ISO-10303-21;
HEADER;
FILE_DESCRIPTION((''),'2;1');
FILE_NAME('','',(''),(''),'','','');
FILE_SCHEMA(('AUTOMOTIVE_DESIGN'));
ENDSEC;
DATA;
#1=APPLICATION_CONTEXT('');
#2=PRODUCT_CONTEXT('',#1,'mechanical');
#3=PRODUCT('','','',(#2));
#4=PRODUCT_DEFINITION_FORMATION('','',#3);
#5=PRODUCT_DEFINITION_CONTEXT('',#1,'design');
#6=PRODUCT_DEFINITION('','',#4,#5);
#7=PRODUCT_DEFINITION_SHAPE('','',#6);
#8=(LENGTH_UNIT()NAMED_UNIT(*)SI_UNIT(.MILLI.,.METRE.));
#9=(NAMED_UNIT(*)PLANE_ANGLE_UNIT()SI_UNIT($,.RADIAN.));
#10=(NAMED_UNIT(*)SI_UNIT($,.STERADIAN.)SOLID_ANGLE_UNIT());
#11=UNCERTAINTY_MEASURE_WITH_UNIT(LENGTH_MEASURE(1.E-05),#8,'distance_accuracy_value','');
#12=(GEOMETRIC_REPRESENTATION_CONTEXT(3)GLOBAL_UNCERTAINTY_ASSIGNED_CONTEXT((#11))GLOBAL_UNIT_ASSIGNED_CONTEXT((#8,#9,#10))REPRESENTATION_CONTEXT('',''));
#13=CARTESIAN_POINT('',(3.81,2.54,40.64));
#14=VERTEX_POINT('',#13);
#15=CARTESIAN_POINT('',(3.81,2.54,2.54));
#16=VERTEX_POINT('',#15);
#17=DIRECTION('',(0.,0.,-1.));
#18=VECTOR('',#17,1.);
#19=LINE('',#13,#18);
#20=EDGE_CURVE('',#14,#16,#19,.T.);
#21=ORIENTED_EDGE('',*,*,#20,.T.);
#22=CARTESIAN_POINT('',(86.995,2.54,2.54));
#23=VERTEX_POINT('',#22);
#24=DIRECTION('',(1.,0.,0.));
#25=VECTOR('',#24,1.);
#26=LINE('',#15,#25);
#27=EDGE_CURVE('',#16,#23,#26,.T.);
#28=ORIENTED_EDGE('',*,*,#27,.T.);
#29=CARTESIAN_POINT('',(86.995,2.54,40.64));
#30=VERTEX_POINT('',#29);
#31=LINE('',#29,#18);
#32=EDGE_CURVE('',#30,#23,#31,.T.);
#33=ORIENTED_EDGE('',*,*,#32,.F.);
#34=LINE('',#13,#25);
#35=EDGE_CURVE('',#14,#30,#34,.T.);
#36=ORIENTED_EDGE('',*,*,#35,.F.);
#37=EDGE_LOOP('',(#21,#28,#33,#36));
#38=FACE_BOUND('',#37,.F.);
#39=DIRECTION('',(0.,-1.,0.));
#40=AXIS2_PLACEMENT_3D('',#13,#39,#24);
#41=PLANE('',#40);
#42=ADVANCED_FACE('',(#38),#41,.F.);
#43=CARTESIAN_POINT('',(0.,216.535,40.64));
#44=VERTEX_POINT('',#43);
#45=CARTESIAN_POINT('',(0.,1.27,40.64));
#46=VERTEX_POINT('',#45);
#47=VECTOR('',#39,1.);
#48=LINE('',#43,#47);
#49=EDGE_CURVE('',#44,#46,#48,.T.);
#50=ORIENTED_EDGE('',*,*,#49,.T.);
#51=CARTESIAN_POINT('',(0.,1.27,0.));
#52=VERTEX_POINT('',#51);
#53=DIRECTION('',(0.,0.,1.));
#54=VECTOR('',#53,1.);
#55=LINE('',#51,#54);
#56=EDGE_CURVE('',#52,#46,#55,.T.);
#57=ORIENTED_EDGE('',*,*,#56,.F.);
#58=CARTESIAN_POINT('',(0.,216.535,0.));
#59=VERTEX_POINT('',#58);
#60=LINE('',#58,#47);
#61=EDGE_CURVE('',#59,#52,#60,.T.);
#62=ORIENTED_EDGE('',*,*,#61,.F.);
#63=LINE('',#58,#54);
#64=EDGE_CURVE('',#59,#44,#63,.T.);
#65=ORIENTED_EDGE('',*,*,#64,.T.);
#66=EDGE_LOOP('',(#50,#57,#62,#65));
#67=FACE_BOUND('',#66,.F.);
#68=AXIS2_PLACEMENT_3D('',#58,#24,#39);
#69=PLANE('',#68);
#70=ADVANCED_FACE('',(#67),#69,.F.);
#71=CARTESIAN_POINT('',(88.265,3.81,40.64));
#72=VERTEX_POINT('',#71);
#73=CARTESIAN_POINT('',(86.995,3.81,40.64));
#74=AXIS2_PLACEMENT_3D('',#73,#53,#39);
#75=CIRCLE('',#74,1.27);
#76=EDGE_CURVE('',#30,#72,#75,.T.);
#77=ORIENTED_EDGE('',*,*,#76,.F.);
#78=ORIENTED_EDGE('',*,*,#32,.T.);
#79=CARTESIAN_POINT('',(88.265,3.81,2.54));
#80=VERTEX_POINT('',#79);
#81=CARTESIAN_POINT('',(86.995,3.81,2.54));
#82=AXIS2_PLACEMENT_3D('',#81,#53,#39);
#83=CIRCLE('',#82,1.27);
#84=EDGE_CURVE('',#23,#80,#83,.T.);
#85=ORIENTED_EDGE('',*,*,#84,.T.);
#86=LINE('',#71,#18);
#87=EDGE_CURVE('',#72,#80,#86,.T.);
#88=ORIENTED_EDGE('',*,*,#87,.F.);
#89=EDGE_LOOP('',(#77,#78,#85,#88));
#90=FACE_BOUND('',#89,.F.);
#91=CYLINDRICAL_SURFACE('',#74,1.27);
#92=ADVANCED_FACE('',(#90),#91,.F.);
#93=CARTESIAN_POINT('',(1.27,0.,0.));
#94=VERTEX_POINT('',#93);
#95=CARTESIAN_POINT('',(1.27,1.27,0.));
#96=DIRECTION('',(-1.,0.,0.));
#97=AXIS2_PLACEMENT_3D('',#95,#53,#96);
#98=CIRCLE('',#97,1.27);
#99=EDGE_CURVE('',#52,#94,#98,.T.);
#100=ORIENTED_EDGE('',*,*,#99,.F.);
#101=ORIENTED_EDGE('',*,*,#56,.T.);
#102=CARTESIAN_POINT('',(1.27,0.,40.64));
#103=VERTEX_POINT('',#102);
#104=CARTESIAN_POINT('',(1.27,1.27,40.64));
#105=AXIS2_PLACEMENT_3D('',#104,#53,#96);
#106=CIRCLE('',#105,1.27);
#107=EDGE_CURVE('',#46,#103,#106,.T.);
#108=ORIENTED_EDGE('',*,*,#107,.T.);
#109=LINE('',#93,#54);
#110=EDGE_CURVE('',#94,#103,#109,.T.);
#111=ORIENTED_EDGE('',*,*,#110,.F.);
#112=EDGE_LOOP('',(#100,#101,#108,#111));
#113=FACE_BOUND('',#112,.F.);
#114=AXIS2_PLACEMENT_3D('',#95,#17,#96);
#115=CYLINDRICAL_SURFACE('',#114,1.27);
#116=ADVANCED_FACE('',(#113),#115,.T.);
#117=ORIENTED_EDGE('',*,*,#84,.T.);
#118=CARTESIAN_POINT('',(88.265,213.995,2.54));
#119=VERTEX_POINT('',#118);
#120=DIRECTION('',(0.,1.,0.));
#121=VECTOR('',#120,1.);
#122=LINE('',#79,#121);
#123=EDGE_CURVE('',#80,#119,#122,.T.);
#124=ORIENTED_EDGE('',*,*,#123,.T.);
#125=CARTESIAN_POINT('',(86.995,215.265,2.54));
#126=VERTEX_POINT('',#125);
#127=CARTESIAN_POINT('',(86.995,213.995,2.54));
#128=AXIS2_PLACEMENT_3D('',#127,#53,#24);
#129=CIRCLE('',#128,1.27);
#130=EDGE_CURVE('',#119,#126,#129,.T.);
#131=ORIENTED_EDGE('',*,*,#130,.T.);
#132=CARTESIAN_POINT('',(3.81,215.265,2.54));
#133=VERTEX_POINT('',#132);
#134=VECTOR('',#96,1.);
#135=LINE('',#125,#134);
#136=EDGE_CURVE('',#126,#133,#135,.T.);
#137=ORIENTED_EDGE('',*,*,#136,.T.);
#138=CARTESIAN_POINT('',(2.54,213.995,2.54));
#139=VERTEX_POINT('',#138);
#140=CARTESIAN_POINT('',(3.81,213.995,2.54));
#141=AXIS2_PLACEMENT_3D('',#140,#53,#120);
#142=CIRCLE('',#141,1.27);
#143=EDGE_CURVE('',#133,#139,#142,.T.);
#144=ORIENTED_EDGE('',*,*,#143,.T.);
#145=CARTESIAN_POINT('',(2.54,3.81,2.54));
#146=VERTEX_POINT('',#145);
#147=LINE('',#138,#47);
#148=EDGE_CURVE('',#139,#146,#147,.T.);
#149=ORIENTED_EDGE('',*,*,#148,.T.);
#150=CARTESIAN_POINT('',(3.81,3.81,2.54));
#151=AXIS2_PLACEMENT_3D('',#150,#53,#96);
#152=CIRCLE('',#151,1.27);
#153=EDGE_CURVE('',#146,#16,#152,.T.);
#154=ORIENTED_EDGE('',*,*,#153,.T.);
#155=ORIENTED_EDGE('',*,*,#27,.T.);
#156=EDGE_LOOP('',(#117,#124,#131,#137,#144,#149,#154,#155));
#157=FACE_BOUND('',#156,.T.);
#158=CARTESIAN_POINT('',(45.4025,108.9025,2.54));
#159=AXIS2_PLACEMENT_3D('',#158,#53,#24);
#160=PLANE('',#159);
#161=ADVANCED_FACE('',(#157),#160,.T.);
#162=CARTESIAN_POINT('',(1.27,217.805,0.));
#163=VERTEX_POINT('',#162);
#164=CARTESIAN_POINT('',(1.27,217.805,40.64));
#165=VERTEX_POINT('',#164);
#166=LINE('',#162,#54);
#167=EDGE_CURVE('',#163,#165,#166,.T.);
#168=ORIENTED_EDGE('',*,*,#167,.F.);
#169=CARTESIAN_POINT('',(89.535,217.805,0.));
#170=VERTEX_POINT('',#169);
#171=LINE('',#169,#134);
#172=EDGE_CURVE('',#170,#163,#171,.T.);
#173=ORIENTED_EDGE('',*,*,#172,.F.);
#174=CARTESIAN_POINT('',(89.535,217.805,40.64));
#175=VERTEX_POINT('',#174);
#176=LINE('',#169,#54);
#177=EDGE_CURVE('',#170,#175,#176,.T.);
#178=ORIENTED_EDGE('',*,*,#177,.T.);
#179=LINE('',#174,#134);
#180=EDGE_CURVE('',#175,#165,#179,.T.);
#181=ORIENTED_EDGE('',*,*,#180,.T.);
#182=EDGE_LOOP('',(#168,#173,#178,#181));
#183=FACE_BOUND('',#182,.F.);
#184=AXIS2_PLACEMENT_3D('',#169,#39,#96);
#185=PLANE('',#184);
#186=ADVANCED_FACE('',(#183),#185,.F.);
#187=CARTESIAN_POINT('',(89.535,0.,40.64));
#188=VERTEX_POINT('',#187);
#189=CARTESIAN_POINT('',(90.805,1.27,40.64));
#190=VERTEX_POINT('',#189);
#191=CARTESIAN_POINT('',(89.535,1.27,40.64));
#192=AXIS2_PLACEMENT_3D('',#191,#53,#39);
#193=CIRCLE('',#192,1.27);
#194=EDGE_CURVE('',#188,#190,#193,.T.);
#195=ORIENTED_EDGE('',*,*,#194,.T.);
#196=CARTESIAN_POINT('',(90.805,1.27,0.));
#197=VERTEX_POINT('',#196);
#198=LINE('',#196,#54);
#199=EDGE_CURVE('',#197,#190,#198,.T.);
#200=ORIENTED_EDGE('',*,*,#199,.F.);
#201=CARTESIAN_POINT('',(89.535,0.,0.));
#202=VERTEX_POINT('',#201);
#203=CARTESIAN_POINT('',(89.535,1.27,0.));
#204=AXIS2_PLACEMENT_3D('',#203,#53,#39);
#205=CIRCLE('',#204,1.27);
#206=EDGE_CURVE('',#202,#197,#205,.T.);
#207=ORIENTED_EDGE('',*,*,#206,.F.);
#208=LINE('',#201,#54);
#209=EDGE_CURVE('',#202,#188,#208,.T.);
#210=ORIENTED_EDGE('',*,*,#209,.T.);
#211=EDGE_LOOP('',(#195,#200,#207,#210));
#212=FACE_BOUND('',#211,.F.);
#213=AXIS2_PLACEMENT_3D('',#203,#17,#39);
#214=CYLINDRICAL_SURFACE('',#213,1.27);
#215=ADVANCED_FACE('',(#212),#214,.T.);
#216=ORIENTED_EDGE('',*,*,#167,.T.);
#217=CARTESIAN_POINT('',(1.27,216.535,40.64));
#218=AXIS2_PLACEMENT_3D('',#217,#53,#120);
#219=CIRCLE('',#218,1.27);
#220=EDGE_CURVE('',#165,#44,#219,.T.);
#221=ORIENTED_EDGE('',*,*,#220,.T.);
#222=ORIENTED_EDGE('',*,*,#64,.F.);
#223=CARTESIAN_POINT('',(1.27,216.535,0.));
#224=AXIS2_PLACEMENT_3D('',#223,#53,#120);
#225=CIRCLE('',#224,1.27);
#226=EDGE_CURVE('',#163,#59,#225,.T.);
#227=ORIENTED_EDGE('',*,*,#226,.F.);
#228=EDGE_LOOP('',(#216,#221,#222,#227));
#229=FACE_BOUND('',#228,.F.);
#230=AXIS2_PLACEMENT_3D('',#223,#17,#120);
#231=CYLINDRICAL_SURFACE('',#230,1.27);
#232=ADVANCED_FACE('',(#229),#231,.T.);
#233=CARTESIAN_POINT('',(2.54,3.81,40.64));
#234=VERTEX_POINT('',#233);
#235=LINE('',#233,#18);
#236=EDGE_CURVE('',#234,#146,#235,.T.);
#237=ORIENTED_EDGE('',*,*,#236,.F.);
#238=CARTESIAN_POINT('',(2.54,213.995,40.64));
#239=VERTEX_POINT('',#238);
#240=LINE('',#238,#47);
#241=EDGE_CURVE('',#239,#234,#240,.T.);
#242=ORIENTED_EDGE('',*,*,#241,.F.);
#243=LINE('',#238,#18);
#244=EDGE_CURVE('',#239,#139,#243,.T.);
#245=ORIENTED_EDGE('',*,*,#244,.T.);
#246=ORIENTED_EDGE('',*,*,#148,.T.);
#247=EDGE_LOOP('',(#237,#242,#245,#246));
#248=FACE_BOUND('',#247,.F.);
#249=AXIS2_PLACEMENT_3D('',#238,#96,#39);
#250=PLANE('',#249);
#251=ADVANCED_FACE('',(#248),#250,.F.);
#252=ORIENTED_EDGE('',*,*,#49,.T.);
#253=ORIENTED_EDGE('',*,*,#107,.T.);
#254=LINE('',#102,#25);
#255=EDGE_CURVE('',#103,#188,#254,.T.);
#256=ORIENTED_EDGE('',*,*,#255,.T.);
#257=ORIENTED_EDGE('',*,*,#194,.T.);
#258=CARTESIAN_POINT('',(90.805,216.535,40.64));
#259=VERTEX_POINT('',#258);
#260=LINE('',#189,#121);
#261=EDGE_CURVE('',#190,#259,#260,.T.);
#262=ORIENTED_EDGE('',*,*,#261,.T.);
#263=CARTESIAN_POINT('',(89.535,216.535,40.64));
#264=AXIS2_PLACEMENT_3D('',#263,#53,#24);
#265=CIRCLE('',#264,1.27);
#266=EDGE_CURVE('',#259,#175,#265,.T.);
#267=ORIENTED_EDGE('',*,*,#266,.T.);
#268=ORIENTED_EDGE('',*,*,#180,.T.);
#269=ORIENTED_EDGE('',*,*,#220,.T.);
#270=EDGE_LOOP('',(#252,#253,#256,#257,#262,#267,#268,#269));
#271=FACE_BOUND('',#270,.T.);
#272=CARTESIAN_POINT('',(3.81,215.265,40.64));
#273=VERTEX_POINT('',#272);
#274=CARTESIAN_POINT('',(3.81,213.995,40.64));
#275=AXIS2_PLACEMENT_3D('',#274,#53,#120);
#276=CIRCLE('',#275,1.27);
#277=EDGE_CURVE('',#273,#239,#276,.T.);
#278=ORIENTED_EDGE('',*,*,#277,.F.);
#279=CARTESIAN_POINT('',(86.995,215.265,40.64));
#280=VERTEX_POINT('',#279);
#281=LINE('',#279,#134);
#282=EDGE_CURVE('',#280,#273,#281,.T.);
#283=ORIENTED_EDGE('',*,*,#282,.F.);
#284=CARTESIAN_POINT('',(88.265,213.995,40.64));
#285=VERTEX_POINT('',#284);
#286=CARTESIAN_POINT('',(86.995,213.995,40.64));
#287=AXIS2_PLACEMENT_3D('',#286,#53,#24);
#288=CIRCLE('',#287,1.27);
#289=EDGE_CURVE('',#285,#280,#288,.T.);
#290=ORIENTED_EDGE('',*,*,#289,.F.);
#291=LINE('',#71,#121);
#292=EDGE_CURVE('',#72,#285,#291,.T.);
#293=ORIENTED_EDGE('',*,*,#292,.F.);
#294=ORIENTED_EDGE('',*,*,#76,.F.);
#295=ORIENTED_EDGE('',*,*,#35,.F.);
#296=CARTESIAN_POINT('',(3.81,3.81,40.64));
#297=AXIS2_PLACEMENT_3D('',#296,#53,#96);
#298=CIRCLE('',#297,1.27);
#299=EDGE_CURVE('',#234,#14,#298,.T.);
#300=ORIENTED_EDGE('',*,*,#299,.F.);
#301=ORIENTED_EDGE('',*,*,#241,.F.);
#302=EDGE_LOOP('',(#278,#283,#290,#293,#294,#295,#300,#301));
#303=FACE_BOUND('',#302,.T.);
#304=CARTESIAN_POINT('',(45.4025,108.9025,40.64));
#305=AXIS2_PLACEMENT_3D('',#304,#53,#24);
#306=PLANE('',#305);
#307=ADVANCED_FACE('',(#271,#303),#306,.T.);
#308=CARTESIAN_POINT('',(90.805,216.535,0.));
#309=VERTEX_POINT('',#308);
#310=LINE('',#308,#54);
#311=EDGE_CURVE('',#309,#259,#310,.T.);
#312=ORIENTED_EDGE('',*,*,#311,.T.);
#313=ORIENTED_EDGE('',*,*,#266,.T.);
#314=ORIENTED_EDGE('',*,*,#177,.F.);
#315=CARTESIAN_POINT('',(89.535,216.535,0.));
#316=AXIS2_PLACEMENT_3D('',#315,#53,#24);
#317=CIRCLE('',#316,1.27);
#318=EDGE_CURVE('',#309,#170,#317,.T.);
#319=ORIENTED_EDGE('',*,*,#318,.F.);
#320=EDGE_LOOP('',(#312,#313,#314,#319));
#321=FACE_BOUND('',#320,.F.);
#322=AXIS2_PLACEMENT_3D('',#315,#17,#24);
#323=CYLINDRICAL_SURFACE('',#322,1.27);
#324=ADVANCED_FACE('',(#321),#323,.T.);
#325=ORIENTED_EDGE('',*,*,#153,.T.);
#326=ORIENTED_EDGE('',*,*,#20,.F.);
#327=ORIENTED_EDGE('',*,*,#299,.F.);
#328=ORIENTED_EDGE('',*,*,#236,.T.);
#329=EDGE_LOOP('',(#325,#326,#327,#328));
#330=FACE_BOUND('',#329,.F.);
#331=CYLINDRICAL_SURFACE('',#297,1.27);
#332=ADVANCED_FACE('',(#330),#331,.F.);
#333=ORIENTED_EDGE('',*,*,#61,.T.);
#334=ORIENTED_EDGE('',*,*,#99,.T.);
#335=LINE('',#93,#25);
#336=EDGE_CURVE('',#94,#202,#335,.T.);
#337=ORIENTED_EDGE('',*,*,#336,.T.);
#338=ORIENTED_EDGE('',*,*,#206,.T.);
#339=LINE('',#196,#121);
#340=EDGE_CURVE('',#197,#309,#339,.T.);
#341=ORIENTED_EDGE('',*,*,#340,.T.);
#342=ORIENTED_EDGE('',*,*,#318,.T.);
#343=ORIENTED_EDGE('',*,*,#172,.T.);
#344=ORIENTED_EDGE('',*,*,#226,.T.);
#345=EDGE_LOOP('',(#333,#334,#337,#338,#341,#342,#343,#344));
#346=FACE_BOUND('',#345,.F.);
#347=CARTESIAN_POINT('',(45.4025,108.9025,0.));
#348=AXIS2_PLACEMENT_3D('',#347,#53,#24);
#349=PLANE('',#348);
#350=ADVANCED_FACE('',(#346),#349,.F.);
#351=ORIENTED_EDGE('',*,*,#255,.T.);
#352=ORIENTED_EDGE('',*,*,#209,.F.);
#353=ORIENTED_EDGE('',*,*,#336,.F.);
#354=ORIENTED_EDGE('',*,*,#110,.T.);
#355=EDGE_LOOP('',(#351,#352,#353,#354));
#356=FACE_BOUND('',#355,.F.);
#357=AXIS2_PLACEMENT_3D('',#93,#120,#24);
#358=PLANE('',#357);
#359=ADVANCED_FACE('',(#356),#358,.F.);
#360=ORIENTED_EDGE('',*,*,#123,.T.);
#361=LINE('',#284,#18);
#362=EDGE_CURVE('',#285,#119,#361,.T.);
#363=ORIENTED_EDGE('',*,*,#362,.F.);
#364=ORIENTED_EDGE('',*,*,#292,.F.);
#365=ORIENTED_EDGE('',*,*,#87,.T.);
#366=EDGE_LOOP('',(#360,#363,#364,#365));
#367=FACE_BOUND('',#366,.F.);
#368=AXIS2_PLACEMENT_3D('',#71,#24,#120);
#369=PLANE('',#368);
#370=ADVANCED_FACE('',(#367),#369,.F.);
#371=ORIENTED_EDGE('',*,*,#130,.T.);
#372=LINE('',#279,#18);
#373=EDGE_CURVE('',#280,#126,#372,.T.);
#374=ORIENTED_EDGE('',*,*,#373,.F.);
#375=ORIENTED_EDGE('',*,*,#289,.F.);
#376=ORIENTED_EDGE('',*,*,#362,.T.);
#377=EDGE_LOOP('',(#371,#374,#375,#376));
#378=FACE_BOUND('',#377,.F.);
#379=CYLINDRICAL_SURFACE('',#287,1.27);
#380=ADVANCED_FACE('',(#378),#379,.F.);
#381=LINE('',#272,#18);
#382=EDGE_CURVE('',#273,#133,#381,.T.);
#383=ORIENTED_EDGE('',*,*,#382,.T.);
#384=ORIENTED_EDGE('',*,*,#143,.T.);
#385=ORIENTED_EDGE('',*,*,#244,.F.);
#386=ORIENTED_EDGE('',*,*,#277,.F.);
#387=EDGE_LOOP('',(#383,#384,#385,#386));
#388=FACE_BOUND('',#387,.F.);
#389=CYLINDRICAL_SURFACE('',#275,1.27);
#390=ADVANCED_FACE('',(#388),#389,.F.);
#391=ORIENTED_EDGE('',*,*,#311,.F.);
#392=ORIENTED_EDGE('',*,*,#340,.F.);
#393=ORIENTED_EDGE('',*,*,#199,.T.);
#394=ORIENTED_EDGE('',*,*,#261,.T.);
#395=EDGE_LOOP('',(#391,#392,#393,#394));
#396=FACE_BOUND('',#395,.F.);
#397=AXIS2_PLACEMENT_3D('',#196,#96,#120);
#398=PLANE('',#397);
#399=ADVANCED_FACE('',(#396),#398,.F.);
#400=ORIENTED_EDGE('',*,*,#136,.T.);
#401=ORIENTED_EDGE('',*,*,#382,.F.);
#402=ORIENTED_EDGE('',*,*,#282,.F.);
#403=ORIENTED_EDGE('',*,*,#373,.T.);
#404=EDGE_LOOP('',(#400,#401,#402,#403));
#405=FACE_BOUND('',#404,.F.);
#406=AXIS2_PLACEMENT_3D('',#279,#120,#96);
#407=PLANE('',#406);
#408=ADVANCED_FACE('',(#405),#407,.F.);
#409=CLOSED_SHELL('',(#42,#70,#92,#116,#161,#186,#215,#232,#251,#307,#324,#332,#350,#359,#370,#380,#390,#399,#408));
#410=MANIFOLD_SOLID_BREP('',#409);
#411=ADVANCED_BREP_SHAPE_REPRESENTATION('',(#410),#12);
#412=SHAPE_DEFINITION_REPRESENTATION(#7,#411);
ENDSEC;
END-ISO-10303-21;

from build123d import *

# Parameters (mm, degrees)
F2_DEPTH = 40.64
F4_DEPTH = 38.1


# Not quite as in the source:
# - a variable given as a bare number and used for a length is read in inches; the dataset says mm whatever the document's units were


with BuildPart() as f2:
    # F1 (on Top) → F2 (new body)
    with BuildSketch(Plane.XY):
        with BuildLine():
            ThreePointArc((0, 1.27), (0.3719743879, 0.3719743879), (1.27, 0))
            Line((1.27, 0), (89.535, 0))
            ThreePointArc((89.535, 0), (90.4330256121, 0.3719743879), (90.805, 1.27))
            Line((90.805, 1.27), (90.805, 216.535))
            ThreePointArc((90.805, 216.535), (90.4330256121, 217.4330256121), (89.535, 217.805))
            Line((89.535, 217.805), (1.27, 217.805))
            ThreePointArc((1.27, 217.805), (0.3719743879, 217.4330256121), (0, 216.535))
            Line((0, 216.535), (0, 1.27))
        make_face()
    extrude(amount=F2_DEPTH)

    # F3 (on face) → F4 (cut)
    with BuildSketch(Plane.XY.offset(40.64)):
        with BuildLine():
            Line((2.54, 213.995), (2.54, 3.81))
            ThreePointArc((2.54, 3.81), (2.9119743879, 2.9119743879), (3.81, 2.54))
            Line((3.81, 2.54), (86.995, 2.54))
            ThreePointArc((86.995, 2.54), (87.8930256121, 2.9119743879), (88.265, 3.81))
            Line((88.265, 3.81), (88.265, 213.995))
            ThreePointArc((88.265, 213.995), (87.8930256121, 214.8930256121), (86.995, 215.265))
            Line((86.995, 215.265), (3.81, 215.265))
            ThreePointArc((3.81, 215.265), (2.9119743879, 214.8930256121), (2.54, 213.995))
        make_face()
    extrude(amount=-F4_DEPTH, mode=Mode.SUBTRACT)


solid = f2.part
